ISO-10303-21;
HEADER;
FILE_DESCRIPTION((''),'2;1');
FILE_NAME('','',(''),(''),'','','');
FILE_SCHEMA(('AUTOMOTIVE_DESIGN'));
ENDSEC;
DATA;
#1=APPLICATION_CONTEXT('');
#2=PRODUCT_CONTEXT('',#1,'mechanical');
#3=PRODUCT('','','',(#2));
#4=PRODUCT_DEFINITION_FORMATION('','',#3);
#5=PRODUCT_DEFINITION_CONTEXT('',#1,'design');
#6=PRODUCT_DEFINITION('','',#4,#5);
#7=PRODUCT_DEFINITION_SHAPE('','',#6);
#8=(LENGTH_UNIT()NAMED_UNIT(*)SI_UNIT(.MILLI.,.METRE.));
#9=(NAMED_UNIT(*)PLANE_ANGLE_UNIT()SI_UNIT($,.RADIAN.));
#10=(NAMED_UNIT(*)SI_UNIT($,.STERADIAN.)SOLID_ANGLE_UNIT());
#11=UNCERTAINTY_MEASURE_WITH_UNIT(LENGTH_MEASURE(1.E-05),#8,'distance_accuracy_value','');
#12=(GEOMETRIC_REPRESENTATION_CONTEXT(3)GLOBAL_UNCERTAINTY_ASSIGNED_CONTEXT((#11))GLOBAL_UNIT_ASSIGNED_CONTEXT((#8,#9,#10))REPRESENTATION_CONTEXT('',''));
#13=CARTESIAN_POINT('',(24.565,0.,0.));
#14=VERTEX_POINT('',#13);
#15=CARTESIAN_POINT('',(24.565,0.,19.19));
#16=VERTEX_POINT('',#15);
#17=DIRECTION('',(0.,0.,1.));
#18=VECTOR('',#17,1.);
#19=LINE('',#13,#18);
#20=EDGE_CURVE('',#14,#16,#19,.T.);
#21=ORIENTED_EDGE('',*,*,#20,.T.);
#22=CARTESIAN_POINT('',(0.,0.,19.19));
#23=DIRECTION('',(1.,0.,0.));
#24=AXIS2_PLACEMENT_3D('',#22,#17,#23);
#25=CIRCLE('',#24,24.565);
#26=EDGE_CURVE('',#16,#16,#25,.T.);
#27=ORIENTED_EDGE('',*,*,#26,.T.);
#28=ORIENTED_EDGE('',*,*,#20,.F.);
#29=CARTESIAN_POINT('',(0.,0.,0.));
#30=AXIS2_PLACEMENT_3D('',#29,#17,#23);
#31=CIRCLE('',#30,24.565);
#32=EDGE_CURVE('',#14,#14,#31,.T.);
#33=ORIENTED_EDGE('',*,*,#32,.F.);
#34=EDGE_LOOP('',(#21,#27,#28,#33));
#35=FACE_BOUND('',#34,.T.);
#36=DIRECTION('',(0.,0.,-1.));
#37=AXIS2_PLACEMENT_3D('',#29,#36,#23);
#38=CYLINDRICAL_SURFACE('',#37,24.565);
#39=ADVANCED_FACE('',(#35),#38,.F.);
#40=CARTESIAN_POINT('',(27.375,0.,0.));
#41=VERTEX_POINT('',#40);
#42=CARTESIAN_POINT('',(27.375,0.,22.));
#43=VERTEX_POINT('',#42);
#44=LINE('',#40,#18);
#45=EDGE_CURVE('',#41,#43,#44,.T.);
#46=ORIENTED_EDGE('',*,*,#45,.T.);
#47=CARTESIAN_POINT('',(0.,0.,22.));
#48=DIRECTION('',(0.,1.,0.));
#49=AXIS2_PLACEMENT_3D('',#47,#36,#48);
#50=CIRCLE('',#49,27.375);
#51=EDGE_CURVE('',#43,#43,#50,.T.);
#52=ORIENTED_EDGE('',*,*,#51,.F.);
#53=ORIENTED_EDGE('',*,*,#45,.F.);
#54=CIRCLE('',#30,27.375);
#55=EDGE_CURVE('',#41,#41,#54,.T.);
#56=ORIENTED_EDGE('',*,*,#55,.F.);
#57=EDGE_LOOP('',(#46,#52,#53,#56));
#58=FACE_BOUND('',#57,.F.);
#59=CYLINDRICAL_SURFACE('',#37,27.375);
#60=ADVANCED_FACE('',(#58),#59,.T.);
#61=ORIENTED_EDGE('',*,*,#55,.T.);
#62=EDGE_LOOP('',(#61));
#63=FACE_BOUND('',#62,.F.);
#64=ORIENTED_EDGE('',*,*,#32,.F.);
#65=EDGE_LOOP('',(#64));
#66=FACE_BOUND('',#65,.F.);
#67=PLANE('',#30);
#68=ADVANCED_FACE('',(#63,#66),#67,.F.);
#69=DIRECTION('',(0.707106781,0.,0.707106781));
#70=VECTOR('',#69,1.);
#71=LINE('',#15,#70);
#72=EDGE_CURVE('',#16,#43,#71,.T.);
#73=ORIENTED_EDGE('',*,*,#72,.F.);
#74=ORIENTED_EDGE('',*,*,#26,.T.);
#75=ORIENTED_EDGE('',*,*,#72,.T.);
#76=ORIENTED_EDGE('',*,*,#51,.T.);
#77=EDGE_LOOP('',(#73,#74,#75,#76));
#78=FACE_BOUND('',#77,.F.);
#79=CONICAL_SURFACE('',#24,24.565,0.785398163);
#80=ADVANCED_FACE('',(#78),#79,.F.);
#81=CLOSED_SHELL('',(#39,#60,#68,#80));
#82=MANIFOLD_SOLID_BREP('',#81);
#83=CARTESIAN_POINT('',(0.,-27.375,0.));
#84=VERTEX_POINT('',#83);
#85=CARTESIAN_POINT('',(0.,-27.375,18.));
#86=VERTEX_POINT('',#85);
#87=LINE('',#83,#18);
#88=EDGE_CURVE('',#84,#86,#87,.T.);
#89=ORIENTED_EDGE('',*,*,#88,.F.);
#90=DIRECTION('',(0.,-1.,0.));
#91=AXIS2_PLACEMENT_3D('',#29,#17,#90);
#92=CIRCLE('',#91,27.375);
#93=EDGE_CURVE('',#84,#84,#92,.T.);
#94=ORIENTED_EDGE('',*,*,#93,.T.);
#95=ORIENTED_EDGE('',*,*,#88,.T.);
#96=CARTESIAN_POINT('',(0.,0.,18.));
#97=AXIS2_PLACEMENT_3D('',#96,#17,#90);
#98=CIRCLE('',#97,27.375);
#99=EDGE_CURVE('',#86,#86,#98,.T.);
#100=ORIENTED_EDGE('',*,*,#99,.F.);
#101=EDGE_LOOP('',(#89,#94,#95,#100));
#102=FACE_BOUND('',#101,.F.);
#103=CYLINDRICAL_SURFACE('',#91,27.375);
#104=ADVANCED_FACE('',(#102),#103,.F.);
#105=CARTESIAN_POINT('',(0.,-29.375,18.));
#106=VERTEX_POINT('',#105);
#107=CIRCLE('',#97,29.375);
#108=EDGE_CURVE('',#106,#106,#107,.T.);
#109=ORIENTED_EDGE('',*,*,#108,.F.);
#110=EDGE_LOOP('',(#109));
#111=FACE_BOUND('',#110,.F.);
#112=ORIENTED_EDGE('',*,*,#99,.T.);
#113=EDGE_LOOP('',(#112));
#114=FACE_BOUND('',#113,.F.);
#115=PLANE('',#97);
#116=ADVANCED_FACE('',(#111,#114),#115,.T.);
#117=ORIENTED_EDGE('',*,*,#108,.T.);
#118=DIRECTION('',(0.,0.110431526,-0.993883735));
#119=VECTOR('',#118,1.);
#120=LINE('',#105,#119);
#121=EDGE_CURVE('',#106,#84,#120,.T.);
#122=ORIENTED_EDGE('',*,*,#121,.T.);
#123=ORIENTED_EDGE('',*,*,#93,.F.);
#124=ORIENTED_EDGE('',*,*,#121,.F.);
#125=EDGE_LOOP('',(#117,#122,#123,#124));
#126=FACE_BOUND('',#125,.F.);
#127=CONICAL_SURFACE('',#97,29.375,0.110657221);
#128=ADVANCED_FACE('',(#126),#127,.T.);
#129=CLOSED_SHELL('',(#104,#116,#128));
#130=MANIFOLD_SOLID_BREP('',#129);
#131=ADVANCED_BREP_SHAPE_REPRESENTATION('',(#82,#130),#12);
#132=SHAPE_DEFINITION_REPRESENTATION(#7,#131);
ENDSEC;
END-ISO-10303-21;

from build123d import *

# Parameters (mm, degrees)
F0_R     = 27.375
F0_R_2   = 24.565
F1_DEPTH = 22.09


# Not quite as in the source:
# - a fillet or chamfer that OpenCascade refuses, or shapes differently, is made with other operations: its cross-section is extruded or revolved along the edge and cut away or added


with BuildPart() as f1:
    # F0 (on Top) → F1 (new body)
    with BuildSketch(Plane.XY):
        Circle(F0_R)
        Circle(F0_R_2, mode=Mode.SUBTRACT)
    extrude(amount=F1_DEPTH)

    # F2: chamfer of 2.9 on 1 edges, made by hand

    # F2_s1 → F2_t2 (revolve, cut)
    with BuildSketch(Plane.XZ):
        Polygon((24.565, 19.19), (27.465, 22.09), (24.565, 22.09), align=None)
    revolve(axis=Axis((0, 0, 22.09), (0, 0, 1)), mode=Mode.SUBTRACT)


with BuildPart() as f5:
    # F3 (on Right) → F5 (revolve)
    with BuildSketch(Plane.YZ):
        Polygon((-29.375, 18), (-27.375, 0), (-27.375, 18), align=None)
    revolve(axis=Axis((0, 0, 7.8462371603), (0, 0, 1)))


solid = Compound([f1.part, f5.part])
